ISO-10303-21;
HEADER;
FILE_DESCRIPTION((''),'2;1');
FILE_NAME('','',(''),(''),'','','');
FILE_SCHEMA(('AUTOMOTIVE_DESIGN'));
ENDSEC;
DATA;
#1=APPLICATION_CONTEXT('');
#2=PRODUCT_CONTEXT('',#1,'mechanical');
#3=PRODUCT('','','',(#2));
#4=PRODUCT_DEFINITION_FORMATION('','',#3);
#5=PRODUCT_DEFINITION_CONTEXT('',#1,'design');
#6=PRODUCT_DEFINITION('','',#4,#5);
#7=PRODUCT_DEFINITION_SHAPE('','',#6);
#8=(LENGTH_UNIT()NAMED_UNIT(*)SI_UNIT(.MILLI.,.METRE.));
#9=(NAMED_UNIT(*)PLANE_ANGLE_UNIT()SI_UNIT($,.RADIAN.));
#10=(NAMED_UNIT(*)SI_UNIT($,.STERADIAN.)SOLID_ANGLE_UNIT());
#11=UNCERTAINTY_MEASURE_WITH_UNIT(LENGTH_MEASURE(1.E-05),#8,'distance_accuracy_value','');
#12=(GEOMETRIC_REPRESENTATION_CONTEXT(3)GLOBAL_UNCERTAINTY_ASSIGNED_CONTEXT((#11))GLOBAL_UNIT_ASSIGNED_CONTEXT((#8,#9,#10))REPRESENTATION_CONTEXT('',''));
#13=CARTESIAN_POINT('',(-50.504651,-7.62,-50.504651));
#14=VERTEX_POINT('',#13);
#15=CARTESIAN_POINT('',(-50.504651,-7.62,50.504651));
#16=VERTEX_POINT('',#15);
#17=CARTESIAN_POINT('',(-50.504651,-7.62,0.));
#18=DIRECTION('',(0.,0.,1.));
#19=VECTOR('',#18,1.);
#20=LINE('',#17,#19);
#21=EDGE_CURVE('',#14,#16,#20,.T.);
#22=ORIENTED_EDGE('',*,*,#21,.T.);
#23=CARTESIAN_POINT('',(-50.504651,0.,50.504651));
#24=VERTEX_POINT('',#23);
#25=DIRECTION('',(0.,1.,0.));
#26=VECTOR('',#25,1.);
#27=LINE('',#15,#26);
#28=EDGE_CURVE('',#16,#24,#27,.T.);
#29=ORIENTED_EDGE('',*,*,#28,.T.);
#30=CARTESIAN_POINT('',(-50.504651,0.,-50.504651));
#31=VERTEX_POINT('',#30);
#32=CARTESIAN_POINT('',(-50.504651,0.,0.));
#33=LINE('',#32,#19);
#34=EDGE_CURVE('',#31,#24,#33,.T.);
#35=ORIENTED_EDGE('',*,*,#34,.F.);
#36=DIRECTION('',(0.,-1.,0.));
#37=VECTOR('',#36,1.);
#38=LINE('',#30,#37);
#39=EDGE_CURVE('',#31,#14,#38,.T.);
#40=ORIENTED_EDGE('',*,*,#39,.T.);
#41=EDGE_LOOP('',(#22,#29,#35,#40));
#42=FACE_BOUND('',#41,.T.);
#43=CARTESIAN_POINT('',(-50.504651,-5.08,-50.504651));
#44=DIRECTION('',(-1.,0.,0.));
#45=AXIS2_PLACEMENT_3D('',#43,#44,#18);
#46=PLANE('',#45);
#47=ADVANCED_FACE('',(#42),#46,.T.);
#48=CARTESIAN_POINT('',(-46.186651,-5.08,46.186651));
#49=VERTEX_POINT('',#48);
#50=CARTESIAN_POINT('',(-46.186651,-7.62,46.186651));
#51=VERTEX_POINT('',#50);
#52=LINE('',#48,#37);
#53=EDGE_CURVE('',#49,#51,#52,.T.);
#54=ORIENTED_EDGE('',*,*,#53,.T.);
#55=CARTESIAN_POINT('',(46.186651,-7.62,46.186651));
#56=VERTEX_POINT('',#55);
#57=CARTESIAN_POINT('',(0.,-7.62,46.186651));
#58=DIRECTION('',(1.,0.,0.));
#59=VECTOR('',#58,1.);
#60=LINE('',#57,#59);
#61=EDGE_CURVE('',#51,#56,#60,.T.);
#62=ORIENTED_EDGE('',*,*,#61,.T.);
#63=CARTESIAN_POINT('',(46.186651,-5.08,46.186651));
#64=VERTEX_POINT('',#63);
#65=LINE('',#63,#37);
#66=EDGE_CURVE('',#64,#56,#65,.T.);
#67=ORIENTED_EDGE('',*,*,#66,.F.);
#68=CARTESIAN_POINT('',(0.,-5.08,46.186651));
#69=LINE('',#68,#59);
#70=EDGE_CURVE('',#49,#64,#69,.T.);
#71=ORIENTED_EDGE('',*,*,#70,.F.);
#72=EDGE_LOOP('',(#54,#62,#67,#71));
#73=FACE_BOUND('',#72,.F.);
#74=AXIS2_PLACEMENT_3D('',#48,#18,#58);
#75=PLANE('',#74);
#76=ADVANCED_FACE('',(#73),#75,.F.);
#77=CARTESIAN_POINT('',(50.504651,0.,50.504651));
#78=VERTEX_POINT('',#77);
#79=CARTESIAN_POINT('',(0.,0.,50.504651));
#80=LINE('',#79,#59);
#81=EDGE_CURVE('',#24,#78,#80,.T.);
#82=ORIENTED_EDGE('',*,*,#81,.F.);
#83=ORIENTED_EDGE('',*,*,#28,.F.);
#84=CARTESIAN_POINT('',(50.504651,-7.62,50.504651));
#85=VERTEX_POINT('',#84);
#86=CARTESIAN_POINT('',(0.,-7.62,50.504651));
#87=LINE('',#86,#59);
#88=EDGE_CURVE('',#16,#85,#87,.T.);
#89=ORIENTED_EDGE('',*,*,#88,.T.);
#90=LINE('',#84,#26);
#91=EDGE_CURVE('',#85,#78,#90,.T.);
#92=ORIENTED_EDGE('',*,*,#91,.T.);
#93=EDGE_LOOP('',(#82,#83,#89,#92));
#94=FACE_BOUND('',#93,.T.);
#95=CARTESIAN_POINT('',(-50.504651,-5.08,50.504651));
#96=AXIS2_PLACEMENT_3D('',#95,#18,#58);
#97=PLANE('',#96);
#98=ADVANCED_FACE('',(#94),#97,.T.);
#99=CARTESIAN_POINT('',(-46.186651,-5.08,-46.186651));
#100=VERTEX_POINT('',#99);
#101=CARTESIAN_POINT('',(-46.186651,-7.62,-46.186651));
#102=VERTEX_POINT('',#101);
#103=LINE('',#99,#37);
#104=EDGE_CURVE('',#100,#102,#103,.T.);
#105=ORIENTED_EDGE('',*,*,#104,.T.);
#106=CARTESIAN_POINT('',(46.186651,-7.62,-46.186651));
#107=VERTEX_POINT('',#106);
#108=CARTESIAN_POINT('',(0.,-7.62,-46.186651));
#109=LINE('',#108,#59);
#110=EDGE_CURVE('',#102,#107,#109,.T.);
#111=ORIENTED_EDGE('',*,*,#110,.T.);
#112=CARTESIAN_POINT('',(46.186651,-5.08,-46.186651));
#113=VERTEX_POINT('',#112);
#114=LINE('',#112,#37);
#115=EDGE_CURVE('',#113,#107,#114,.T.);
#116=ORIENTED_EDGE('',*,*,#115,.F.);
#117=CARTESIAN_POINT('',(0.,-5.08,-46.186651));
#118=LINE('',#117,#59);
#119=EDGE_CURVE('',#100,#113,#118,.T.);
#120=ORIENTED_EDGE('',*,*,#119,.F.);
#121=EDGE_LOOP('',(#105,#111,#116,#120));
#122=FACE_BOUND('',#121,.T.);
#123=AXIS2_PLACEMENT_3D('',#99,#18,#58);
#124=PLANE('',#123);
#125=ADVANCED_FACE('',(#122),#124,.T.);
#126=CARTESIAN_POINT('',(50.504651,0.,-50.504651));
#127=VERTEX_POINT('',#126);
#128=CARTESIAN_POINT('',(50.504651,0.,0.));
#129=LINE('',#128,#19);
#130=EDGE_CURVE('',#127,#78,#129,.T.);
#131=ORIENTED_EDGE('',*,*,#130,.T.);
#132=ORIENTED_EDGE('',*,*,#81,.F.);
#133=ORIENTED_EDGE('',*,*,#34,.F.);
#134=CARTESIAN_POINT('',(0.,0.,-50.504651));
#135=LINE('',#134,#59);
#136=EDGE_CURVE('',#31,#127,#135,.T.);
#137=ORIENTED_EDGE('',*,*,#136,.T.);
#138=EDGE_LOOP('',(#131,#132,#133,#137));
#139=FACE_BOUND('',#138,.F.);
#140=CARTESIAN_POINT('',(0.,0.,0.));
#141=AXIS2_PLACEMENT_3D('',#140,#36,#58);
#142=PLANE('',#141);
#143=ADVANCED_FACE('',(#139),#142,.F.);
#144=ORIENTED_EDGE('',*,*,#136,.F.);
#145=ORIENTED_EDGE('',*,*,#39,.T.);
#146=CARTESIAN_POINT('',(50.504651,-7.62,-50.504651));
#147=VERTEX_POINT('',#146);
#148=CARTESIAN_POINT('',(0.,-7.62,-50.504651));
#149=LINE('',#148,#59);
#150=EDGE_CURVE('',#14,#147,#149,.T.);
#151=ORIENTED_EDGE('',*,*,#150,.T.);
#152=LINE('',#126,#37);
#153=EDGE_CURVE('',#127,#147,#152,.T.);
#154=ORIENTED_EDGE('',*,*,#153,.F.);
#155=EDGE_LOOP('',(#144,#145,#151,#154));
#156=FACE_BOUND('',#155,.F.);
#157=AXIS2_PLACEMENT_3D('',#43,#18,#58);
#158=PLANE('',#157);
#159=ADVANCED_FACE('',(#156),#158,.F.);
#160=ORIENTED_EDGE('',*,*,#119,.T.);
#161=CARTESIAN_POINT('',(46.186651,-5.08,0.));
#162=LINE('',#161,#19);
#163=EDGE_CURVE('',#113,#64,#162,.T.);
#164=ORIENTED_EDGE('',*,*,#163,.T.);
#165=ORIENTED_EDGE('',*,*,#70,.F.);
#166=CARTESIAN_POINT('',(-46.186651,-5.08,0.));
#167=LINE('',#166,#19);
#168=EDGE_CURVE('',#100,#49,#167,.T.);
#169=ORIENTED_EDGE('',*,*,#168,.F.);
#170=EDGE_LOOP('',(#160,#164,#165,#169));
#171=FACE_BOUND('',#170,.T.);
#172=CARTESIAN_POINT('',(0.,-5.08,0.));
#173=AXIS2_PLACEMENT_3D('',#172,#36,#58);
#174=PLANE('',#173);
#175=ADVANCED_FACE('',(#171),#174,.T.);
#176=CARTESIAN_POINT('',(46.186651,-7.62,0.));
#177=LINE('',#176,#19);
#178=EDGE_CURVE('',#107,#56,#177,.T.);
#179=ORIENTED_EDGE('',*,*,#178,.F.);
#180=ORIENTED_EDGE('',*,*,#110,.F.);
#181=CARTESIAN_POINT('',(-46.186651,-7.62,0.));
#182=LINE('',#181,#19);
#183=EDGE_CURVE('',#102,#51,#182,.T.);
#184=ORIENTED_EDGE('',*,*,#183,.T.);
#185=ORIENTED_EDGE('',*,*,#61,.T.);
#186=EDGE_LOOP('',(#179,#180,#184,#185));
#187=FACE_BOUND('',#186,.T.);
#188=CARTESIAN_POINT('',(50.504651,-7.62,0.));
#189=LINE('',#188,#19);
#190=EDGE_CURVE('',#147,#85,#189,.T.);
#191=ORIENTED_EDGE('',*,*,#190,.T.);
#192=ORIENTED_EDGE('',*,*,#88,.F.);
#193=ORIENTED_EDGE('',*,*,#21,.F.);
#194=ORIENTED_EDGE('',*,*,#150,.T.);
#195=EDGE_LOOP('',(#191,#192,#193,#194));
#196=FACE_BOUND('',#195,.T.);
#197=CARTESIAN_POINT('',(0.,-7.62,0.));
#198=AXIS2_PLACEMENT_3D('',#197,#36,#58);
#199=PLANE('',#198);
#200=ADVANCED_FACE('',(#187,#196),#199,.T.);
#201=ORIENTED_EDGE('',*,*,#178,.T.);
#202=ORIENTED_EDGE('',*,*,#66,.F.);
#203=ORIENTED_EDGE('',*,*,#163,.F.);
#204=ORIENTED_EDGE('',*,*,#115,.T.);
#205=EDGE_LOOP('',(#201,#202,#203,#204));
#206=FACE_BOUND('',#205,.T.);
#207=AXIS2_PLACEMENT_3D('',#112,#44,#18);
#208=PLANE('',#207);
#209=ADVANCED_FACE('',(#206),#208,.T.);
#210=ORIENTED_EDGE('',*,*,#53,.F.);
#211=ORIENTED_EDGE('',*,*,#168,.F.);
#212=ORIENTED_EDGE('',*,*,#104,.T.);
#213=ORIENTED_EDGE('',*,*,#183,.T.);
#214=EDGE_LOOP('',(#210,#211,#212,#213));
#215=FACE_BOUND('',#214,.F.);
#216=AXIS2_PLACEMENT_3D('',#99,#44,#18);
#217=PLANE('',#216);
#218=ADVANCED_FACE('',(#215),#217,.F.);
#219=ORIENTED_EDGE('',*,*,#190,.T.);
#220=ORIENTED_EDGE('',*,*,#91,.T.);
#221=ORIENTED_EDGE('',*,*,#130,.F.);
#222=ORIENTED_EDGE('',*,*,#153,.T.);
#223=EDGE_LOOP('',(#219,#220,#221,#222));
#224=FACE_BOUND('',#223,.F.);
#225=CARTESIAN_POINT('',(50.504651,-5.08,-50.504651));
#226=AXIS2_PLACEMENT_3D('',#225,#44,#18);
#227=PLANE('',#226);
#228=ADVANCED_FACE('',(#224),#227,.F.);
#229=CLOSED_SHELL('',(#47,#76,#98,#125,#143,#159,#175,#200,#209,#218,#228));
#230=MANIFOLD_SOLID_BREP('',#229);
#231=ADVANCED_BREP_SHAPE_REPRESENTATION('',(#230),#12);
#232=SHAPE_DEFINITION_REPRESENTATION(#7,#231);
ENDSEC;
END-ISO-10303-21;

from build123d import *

# Parameters (mm, degrees)
F0_W     = 101.0093018413
F0_H     = 101.0093018413
F1_DEPTH = 5.08
F2_W     = 101.0093018413
F2_H     = 101.0093018413
F2_W_2   = 92.3733018413
F2_H_2   = 92.3733018413
F3_DEPTH = 2.54


# Not quite as in the source:
# - the program builds the solid bodies; features that only make, move or delete a surface that nothing else refers to are left out


with BuildPart() as f1:
    # F0 (on Front) → F1 (new body)
    with BuildSketch(Plane.XZ):
        Rectangle(F0_W, F0_H)
    extrude(amount=F1_DEPTH)

    # F2 (on face) → F3 (join)
    with BuildSketch(Plane.XZ.offset(5.08)):
        Rectangle(F2_W, F2_H)
        Rectangle(F2_W_2, F2_H_2, mode=Mode.SUBTRACT)
    extrude(amount=F3_DEPTH)


solid = f1.part
